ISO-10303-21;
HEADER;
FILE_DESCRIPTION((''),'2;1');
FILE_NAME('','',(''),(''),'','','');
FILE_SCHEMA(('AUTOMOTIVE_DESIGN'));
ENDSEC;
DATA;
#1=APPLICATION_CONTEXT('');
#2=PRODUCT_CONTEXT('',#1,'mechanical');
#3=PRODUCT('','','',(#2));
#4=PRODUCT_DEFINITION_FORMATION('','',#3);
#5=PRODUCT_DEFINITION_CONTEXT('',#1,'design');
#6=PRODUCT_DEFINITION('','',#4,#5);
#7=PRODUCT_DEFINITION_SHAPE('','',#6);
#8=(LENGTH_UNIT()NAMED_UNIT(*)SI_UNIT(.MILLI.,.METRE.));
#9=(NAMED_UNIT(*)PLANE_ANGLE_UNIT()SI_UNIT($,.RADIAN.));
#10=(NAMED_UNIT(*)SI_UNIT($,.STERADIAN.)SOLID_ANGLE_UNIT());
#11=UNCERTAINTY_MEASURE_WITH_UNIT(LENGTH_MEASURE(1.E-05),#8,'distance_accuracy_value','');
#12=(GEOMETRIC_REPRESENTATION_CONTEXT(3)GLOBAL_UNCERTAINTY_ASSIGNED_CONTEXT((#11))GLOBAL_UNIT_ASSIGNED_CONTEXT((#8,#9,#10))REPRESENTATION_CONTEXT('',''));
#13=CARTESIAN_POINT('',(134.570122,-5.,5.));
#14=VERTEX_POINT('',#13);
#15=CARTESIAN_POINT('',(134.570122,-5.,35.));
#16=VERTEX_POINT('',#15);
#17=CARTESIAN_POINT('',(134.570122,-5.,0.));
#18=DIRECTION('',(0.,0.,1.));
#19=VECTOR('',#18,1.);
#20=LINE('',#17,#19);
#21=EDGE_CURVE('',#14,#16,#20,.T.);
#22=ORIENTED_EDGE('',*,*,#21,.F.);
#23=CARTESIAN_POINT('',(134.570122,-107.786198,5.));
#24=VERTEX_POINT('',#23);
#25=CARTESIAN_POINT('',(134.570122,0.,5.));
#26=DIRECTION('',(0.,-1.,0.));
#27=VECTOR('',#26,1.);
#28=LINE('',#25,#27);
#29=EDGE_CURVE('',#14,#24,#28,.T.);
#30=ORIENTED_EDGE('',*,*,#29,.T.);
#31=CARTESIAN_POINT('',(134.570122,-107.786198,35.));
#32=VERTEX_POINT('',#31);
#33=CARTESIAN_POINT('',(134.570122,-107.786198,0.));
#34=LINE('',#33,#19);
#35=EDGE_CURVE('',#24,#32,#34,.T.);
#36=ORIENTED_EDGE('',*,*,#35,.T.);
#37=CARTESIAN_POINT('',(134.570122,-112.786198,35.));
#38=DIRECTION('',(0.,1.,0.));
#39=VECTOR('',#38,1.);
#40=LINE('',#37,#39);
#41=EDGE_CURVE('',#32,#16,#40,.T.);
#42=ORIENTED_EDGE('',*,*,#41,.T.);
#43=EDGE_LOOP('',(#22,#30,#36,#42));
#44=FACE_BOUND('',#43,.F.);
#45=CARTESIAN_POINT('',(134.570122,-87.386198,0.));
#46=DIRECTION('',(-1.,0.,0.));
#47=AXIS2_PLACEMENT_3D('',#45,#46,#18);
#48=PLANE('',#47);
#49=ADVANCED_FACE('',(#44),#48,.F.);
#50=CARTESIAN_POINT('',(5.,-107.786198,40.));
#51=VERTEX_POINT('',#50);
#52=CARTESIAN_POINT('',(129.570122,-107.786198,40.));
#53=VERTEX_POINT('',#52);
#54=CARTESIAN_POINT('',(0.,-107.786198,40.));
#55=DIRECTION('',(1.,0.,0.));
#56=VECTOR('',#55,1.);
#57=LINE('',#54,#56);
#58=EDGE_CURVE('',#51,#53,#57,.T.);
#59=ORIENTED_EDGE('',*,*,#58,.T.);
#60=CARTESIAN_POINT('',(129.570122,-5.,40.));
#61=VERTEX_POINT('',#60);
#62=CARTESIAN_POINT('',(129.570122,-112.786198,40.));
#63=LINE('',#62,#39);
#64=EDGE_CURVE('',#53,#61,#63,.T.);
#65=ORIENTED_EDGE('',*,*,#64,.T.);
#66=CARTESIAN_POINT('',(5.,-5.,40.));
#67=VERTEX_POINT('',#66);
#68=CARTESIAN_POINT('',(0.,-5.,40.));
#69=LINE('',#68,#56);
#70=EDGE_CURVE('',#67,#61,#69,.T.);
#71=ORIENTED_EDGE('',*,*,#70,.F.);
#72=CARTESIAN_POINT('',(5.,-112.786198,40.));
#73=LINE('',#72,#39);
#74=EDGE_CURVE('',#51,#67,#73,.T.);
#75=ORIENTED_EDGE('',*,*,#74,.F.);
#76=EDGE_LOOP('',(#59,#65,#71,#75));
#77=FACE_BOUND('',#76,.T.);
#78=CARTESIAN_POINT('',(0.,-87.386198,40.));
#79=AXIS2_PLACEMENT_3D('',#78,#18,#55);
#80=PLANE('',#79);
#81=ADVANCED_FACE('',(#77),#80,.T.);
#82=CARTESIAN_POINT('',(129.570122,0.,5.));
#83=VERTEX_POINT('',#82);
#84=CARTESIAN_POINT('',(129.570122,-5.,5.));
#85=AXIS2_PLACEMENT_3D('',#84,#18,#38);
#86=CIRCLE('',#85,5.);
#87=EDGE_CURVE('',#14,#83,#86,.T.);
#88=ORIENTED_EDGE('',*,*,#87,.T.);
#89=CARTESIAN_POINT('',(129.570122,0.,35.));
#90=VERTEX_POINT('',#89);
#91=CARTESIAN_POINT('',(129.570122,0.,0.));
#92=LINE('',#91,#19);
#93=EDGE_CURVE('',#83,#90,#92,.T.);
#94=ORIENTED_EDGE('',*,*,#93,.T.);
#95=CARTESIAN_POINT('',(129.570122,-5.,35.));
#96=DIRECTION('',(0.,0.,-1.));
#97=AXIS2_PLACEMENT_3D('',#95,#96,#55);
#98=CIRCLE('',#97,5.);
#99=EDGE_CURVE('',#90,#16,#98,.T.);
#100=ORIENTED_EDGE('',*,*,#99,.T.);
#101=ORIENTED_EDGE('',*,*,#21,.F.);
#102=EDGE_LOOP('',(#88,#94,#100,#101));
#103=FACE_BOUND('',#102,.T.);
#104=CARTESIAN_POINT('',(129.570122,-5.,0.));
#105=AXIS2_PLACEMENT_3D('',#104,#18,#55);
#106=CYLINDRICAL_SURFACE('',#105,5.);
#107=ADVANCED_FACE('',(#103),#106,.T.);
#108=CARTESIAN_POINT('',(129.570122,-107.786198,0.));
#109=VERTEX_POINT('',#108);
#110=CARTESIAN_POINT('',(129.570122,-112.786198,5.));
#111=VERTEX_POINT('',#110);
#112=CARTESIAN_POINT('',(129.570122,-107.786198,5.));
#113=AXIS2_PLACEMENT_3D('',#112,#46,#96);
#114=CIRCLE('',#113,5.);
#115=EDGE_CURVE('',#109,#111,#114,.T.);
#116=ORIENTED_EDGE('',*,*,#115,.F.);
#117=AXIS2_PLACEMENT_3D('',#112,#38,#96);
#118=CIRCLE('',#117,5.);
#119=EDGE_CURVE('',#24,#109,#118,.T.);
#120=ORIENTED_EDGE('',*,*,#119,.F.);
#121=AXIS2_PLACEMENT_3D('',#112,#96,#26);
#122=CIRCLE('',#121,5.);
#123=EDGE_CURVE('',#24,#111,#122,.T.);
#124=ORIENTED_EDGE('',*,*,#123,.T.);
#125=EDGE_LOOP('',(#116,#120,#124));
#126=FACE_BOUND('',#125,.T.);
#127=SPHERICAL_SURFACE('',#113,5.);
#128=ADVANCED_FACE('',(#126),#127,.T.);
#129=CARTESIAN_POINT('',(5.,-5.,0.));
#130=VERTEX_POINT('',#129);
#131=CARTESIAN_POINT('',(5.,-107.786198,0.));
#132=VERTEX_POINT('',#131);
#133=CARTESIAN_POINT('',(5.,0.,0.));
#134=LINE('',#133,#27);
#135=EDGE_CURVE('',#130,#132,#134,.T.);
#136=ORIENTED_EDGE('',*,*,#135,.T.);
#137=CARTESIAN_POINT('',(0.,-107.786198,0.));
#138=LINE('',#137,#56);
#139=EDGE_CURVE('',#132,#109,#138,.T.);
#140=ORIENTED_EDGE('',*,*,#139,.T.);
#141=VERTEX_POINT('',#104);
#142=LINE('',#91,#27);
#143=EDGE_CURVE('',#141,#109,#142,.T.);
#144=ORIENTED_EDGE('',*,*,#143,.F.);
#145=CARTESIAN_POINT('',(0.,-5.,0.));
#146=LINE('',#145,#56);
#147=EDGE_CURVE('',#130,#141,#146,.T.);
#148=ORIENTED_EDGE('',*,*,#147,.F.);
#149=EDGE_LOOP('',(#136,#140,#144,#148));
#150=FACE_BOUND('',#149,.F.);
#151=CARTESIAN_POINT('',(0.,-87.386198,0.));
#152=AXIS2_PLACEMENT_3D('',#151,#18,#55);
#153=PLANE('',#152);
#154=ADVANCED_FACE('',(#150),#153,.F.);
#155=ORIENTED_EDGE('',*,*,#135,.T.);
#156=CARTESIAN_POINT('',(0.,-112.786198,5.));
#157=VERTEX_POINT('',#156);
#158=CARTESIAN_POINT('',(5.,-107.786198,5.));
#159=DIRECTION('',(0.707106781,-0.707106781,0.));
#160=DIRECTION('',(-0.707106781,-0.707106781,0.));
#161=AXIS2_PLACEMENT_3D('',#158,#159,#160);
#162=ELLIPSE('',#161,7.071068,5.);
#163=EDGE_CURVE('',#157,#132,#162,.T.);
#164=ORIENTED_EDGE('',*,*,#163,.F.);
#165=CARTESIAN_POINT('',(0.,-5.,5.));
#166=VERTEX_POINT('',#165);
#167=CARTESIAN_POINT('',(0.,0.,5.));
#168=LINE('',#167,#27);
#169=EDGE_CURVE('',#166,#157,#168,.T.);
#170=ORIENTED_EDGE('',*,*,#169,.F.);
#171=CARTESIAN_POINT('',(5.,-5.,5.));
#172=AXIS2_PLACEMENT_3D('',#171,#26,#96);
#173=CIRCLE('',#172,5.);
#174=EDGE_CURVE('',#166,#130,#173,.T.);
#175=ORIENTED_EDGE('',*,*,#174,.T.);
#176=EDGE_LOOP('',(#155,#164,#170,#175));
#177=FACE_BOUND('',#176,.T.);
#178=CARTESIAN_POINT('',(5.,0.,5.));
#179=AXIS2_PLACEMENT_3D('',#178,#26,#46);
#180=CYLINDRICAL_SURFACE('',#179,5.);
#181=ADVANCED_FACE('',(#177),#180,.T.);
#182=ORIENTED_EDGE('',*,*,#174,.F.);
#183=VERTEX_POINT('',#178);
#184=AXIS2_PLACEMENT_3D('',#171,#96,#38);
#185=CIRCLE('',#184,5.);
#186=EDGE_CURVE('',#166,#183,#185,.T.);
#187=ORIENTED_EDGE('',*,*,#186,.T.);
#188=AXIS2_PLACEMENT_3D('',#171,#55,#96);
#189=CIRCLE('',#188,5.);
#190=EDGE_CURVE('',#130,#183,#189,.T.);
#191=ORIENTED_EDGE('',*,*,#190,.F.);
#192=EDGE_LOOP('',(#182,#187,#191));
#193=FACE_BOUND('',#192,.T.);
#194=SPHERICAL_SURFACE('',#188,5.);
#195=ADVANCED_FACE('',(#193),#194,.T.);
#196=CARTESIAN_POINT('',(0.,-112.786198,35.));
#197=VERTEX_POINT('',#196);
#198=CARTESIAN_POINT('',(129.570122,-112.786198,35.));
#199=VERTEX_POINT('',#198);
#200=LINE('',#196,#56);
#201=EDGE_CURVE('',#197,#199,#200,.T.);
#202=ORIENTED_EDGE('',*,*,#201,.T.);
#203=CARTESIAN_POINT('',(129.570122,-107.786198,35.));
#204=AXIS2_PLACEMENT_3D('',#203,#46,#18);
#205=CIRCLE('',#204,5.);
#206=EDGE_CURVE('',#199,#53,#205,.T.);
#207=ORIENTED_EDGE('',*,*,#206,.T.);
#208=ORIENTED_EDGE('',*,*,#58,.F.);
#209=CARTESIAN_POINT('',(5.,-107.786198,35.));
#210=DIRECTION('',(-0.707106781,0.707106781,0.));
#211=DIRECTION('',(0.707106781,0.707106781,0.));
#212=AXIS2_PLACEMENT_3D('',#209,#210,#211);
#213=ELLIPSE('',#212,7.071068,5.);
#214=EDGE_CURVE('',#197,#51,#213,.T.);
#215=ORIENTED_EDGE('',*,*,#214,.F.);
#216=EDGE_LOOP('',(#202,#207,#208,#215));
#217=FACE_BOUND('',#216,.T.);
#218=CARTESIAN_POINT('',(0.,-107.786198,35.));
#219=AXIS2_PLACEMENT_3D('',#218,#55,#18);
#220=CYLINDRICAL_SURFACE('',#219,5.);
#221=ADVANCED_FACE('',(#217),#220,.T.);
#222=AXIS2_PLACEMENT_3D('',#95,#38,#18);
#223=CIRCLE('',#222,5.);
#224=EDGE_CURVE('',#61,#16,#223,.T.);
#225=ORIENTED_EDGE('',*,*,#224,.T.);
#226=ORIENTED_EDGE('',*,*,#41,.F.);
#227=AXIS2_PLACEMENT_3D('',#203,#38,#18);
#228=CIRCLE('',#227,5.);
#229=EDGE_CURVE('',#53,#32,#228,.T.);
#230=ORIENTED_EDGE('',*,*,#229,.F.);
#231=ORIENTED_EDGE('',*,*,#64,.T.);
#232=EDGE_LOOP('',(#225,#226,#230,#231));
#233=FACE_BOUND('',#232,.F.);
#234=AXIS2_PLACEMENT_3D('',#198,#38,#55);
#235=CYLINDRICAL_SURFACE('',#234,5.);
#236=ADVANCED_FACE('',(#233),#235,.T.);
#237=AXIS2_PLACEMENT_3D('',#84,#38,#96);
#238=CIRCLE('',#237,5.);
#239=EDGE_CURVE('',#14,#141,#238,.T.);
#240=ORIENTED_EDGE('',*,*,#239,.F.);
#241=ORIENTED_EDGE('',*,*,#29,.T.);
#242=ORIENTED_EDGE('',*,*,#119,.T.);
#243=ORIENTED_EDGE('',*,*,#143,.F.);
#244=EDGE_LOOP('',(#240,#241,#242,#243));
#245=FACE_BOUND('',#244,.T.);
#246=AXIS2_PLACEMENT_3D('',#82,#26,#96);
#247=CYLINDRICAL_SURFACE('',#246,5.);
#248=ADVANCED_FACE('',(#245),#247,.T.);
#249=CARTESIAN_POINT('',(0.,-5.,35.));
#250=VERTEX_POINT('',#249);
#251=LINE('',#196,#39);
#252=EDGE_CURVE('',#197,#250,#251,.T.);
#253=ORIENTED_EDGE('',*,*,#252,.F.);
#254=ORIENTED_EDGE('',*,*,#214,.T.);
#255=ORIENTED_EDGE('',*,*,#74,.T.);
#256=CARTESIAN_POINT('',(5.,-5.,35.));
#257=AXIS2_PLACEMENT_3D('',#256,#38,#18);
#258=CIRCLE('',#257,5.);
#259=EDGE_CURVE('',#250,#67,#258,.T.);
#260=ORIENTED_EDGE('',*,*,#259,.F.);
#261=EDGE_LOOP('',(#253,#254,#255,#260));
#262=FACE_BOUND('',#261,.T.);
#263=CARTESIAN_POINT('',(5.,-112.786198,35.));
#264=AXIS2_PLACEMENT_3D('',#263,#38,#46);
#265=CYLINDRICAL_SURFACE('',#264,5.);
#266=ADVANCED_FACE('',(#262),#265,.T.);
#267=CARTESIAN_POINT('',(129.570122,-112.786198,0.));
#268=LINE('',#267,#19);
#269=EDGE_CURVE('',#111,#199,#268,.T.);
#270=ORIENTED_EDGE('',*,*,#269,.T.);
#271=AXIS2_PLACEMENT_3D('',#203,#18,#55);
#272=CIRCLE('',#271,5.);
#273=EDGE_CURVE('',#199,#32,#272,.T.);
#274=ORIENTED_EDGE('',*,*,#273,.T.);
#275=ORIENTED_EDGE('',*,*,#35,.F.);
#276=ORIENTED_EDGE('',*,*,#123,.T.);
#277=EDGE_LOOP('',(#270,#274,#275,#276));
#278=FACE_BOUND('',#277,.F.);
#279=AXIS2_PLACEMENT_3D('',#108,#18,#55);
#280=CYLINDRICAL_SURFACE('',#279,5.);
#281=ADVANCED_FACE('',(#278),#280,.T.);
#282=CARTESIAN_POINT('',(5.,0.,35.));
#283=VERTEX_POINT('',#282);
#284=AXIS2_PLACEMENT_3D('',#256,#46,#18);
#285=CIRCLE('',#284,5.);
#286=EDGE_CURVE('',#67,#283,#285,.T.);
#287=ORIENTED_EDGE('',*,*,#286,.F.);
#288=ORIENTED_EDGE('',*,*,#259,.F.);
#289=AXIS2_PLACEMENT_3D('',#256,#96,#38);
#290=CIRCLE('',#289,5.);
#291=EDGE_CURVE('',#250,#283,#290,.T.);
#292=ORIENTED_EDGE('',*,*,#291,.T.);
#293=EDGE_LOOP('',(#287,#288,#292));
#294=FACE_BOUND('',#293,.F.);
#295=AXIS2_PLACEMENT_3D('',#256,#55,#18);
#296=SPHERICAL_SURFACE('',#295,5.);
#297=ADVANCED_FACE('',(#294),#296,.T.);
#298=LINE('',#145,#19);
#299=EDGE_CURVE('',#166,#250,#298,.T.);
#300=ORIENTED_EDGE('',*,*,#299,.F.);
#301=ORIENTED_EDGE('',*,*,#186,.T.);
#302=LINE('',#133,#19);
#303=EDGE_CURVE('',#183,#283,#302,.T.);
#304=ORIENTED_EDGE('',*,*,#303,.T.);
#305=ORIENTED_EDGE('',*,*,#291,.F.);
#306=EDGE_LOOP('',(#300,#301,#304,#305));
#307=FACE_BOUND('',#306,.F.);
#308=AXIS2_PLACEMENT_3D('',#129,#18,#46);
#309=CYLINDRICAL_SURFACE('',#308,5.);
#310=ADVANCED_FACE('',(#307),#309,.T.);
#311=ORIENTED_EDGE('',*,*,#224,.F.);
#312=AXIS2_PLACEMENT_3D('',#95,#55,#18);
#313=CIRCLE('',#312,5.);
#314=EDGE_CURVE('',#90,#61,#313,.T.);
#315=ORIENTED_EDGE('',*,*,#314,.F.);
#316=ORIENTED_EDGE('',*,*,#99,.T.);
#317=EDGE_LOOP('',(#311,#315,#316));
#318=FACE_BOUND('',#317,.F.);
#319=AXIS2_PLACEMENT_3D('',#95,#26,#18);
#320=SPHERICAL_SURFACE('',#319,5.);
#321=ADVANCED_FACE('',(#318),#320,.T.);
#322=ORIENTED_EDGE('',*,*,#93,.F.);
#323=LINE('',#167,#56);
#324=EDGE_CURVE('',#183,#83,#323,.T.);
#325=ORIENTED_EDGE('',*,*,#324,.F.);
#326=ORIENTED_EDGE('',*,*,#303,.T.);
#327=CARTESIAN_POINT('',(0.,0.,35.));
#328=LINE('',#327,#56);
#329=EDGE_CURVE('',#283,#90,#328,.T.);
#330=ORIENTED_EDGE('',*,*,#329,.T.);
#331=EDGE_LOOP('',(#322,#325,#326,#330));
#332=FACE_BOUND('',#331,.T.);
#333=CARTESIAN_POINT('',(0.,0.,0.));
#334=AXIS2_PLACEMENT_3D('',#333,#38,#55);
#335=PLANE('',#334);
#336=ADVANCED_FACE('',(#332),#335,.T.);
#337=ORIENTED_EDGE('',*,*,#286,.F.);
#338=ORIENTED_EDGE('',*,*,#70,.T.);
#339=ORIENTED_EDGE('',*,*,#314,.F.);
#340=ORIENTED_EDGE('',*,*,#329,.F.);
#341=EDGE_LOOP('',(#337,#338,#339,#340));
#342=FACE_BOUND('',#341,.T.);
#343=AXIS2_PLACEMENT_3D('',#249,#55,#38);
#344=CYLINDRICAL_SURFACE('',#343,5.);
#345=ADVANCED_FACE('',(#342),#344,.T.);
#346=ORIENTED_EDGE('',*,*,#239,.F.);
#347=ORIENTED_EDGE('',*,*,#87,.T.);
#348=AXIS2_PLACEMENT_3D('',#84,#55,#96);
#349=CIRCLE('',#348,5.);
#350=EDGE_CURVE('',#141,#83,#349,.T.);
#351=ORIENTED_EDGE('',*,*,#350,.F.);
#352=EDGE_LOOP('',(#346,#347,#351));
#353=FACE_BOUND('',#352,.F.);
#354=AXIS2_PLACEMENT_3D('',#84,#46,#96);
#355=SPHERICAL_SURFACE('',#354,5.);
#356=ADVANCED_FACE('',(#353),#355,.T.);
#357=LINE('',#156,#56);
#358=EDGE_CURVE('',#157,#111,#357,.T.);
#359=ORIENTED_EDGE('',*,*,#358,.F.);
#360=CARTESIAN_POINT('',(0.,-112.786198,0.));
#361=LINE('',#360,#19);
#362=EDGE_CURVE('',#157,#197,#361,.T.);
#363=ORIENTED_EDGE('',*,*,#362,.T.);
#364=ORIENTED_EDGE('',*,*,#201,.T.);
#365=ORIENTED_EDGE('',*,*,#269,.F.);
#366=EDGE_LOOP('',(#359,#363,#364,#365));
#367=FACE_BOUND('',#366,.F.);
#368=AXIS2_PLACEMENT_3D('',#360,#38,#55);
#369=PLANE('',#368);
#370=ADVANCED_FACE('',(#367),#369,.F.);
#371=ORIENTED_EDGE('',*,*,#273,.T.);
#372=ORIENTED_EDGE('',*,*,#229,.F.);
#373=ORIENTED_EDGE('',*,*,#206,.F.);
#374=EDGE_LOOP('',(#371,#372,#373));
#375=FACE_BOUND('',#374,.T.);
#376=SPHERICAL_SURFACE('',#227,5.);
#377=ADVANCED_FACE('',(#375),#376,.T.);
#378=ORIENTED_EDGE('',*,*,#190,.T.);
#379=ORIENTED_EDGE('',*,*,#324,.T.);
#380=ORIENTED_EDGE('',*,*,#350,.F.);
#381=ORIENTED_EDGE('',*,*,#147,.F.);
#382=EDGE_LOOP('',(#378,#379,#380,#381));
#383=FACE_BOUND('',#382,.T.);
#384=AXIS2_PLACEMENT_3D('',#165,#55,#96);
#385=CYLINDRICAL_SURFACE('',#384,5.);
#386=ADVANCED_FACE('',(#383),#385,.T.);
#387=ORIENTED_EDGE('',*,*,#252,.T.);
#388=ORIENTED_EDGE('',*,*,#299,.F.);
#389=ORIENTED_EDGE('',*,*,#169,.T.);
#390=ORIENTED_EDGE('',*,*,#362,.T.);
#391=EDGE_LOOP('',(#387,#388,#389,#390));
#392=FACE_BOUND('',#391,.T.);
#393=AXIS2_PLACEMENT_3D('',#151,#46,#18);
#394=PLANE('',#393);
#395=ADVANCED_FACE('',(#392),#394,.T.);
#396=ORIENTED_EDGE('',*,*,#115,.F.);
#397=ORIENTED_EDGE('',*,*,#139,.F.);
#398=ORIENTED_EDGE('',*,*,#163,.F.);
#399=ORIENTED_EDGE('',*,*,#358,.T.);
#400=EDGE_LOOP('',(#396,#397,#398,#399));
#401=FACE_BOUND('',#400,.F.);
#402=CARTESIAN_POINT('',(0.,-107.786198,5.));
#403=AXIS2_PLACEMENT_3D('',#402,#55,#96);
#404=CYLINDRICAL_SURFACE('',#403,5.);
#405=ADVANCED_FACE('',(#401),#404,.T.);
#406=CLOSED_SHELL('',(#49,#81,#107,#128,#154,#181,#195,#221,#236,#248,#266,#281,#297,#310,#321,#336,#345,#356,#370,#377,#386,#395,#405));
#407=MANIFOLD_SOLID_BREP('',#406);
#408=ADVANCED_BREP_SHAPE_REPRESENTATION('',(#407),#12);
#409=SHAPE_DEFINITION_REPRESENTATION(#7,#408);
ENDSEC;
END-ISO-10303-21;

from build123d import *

# Parameters (mm, degrees)
F0_W     = 134.5701217651
F0_H     = 87.3861983418
F1_DEPTH = 40
F2_DEPTH = 25.4
F3_R     = 5


with BuildPart() as f1:
    # F0 (on Top) → F1 (new body)
    with BuildSketch(Plane.XY):
        with Locations((67.2850608826, -43.6930991709)):
            Rectangle(F0_W, F0_H)
    extrude(amount=F1_DEPTH)

    # F2 (add): a face of the model
    f2_faces = [f1.faces().sort_by_distance(p)[0] for p in [
        (67.2850608826, -87.3861983418, 20),
    ]]
    extrude(f2_faces, amount=F2_DEPTH)

    # F3
    f3_edges = [f1.edges().sort_by_distance(p)[0] for p in [
        (134.570122, -56.393099, 40),
        (67.285061, 0, 40),
        (0, -56.393099, 40),
        (67.285061, -112.786198, 40),
        (67.285061, 0, 0),
        (0, -56.393099, 0),
        (67.285061, -112.786198, 0),
        (134.570122, -56.393099, 0),
        (134.570122, 0, 20),
        (134.570122, -112.786198, 20),
        (0, 0, 20),
    ]]
    fillet(f3_edges, radius=F3_R)


solid = f1.part
